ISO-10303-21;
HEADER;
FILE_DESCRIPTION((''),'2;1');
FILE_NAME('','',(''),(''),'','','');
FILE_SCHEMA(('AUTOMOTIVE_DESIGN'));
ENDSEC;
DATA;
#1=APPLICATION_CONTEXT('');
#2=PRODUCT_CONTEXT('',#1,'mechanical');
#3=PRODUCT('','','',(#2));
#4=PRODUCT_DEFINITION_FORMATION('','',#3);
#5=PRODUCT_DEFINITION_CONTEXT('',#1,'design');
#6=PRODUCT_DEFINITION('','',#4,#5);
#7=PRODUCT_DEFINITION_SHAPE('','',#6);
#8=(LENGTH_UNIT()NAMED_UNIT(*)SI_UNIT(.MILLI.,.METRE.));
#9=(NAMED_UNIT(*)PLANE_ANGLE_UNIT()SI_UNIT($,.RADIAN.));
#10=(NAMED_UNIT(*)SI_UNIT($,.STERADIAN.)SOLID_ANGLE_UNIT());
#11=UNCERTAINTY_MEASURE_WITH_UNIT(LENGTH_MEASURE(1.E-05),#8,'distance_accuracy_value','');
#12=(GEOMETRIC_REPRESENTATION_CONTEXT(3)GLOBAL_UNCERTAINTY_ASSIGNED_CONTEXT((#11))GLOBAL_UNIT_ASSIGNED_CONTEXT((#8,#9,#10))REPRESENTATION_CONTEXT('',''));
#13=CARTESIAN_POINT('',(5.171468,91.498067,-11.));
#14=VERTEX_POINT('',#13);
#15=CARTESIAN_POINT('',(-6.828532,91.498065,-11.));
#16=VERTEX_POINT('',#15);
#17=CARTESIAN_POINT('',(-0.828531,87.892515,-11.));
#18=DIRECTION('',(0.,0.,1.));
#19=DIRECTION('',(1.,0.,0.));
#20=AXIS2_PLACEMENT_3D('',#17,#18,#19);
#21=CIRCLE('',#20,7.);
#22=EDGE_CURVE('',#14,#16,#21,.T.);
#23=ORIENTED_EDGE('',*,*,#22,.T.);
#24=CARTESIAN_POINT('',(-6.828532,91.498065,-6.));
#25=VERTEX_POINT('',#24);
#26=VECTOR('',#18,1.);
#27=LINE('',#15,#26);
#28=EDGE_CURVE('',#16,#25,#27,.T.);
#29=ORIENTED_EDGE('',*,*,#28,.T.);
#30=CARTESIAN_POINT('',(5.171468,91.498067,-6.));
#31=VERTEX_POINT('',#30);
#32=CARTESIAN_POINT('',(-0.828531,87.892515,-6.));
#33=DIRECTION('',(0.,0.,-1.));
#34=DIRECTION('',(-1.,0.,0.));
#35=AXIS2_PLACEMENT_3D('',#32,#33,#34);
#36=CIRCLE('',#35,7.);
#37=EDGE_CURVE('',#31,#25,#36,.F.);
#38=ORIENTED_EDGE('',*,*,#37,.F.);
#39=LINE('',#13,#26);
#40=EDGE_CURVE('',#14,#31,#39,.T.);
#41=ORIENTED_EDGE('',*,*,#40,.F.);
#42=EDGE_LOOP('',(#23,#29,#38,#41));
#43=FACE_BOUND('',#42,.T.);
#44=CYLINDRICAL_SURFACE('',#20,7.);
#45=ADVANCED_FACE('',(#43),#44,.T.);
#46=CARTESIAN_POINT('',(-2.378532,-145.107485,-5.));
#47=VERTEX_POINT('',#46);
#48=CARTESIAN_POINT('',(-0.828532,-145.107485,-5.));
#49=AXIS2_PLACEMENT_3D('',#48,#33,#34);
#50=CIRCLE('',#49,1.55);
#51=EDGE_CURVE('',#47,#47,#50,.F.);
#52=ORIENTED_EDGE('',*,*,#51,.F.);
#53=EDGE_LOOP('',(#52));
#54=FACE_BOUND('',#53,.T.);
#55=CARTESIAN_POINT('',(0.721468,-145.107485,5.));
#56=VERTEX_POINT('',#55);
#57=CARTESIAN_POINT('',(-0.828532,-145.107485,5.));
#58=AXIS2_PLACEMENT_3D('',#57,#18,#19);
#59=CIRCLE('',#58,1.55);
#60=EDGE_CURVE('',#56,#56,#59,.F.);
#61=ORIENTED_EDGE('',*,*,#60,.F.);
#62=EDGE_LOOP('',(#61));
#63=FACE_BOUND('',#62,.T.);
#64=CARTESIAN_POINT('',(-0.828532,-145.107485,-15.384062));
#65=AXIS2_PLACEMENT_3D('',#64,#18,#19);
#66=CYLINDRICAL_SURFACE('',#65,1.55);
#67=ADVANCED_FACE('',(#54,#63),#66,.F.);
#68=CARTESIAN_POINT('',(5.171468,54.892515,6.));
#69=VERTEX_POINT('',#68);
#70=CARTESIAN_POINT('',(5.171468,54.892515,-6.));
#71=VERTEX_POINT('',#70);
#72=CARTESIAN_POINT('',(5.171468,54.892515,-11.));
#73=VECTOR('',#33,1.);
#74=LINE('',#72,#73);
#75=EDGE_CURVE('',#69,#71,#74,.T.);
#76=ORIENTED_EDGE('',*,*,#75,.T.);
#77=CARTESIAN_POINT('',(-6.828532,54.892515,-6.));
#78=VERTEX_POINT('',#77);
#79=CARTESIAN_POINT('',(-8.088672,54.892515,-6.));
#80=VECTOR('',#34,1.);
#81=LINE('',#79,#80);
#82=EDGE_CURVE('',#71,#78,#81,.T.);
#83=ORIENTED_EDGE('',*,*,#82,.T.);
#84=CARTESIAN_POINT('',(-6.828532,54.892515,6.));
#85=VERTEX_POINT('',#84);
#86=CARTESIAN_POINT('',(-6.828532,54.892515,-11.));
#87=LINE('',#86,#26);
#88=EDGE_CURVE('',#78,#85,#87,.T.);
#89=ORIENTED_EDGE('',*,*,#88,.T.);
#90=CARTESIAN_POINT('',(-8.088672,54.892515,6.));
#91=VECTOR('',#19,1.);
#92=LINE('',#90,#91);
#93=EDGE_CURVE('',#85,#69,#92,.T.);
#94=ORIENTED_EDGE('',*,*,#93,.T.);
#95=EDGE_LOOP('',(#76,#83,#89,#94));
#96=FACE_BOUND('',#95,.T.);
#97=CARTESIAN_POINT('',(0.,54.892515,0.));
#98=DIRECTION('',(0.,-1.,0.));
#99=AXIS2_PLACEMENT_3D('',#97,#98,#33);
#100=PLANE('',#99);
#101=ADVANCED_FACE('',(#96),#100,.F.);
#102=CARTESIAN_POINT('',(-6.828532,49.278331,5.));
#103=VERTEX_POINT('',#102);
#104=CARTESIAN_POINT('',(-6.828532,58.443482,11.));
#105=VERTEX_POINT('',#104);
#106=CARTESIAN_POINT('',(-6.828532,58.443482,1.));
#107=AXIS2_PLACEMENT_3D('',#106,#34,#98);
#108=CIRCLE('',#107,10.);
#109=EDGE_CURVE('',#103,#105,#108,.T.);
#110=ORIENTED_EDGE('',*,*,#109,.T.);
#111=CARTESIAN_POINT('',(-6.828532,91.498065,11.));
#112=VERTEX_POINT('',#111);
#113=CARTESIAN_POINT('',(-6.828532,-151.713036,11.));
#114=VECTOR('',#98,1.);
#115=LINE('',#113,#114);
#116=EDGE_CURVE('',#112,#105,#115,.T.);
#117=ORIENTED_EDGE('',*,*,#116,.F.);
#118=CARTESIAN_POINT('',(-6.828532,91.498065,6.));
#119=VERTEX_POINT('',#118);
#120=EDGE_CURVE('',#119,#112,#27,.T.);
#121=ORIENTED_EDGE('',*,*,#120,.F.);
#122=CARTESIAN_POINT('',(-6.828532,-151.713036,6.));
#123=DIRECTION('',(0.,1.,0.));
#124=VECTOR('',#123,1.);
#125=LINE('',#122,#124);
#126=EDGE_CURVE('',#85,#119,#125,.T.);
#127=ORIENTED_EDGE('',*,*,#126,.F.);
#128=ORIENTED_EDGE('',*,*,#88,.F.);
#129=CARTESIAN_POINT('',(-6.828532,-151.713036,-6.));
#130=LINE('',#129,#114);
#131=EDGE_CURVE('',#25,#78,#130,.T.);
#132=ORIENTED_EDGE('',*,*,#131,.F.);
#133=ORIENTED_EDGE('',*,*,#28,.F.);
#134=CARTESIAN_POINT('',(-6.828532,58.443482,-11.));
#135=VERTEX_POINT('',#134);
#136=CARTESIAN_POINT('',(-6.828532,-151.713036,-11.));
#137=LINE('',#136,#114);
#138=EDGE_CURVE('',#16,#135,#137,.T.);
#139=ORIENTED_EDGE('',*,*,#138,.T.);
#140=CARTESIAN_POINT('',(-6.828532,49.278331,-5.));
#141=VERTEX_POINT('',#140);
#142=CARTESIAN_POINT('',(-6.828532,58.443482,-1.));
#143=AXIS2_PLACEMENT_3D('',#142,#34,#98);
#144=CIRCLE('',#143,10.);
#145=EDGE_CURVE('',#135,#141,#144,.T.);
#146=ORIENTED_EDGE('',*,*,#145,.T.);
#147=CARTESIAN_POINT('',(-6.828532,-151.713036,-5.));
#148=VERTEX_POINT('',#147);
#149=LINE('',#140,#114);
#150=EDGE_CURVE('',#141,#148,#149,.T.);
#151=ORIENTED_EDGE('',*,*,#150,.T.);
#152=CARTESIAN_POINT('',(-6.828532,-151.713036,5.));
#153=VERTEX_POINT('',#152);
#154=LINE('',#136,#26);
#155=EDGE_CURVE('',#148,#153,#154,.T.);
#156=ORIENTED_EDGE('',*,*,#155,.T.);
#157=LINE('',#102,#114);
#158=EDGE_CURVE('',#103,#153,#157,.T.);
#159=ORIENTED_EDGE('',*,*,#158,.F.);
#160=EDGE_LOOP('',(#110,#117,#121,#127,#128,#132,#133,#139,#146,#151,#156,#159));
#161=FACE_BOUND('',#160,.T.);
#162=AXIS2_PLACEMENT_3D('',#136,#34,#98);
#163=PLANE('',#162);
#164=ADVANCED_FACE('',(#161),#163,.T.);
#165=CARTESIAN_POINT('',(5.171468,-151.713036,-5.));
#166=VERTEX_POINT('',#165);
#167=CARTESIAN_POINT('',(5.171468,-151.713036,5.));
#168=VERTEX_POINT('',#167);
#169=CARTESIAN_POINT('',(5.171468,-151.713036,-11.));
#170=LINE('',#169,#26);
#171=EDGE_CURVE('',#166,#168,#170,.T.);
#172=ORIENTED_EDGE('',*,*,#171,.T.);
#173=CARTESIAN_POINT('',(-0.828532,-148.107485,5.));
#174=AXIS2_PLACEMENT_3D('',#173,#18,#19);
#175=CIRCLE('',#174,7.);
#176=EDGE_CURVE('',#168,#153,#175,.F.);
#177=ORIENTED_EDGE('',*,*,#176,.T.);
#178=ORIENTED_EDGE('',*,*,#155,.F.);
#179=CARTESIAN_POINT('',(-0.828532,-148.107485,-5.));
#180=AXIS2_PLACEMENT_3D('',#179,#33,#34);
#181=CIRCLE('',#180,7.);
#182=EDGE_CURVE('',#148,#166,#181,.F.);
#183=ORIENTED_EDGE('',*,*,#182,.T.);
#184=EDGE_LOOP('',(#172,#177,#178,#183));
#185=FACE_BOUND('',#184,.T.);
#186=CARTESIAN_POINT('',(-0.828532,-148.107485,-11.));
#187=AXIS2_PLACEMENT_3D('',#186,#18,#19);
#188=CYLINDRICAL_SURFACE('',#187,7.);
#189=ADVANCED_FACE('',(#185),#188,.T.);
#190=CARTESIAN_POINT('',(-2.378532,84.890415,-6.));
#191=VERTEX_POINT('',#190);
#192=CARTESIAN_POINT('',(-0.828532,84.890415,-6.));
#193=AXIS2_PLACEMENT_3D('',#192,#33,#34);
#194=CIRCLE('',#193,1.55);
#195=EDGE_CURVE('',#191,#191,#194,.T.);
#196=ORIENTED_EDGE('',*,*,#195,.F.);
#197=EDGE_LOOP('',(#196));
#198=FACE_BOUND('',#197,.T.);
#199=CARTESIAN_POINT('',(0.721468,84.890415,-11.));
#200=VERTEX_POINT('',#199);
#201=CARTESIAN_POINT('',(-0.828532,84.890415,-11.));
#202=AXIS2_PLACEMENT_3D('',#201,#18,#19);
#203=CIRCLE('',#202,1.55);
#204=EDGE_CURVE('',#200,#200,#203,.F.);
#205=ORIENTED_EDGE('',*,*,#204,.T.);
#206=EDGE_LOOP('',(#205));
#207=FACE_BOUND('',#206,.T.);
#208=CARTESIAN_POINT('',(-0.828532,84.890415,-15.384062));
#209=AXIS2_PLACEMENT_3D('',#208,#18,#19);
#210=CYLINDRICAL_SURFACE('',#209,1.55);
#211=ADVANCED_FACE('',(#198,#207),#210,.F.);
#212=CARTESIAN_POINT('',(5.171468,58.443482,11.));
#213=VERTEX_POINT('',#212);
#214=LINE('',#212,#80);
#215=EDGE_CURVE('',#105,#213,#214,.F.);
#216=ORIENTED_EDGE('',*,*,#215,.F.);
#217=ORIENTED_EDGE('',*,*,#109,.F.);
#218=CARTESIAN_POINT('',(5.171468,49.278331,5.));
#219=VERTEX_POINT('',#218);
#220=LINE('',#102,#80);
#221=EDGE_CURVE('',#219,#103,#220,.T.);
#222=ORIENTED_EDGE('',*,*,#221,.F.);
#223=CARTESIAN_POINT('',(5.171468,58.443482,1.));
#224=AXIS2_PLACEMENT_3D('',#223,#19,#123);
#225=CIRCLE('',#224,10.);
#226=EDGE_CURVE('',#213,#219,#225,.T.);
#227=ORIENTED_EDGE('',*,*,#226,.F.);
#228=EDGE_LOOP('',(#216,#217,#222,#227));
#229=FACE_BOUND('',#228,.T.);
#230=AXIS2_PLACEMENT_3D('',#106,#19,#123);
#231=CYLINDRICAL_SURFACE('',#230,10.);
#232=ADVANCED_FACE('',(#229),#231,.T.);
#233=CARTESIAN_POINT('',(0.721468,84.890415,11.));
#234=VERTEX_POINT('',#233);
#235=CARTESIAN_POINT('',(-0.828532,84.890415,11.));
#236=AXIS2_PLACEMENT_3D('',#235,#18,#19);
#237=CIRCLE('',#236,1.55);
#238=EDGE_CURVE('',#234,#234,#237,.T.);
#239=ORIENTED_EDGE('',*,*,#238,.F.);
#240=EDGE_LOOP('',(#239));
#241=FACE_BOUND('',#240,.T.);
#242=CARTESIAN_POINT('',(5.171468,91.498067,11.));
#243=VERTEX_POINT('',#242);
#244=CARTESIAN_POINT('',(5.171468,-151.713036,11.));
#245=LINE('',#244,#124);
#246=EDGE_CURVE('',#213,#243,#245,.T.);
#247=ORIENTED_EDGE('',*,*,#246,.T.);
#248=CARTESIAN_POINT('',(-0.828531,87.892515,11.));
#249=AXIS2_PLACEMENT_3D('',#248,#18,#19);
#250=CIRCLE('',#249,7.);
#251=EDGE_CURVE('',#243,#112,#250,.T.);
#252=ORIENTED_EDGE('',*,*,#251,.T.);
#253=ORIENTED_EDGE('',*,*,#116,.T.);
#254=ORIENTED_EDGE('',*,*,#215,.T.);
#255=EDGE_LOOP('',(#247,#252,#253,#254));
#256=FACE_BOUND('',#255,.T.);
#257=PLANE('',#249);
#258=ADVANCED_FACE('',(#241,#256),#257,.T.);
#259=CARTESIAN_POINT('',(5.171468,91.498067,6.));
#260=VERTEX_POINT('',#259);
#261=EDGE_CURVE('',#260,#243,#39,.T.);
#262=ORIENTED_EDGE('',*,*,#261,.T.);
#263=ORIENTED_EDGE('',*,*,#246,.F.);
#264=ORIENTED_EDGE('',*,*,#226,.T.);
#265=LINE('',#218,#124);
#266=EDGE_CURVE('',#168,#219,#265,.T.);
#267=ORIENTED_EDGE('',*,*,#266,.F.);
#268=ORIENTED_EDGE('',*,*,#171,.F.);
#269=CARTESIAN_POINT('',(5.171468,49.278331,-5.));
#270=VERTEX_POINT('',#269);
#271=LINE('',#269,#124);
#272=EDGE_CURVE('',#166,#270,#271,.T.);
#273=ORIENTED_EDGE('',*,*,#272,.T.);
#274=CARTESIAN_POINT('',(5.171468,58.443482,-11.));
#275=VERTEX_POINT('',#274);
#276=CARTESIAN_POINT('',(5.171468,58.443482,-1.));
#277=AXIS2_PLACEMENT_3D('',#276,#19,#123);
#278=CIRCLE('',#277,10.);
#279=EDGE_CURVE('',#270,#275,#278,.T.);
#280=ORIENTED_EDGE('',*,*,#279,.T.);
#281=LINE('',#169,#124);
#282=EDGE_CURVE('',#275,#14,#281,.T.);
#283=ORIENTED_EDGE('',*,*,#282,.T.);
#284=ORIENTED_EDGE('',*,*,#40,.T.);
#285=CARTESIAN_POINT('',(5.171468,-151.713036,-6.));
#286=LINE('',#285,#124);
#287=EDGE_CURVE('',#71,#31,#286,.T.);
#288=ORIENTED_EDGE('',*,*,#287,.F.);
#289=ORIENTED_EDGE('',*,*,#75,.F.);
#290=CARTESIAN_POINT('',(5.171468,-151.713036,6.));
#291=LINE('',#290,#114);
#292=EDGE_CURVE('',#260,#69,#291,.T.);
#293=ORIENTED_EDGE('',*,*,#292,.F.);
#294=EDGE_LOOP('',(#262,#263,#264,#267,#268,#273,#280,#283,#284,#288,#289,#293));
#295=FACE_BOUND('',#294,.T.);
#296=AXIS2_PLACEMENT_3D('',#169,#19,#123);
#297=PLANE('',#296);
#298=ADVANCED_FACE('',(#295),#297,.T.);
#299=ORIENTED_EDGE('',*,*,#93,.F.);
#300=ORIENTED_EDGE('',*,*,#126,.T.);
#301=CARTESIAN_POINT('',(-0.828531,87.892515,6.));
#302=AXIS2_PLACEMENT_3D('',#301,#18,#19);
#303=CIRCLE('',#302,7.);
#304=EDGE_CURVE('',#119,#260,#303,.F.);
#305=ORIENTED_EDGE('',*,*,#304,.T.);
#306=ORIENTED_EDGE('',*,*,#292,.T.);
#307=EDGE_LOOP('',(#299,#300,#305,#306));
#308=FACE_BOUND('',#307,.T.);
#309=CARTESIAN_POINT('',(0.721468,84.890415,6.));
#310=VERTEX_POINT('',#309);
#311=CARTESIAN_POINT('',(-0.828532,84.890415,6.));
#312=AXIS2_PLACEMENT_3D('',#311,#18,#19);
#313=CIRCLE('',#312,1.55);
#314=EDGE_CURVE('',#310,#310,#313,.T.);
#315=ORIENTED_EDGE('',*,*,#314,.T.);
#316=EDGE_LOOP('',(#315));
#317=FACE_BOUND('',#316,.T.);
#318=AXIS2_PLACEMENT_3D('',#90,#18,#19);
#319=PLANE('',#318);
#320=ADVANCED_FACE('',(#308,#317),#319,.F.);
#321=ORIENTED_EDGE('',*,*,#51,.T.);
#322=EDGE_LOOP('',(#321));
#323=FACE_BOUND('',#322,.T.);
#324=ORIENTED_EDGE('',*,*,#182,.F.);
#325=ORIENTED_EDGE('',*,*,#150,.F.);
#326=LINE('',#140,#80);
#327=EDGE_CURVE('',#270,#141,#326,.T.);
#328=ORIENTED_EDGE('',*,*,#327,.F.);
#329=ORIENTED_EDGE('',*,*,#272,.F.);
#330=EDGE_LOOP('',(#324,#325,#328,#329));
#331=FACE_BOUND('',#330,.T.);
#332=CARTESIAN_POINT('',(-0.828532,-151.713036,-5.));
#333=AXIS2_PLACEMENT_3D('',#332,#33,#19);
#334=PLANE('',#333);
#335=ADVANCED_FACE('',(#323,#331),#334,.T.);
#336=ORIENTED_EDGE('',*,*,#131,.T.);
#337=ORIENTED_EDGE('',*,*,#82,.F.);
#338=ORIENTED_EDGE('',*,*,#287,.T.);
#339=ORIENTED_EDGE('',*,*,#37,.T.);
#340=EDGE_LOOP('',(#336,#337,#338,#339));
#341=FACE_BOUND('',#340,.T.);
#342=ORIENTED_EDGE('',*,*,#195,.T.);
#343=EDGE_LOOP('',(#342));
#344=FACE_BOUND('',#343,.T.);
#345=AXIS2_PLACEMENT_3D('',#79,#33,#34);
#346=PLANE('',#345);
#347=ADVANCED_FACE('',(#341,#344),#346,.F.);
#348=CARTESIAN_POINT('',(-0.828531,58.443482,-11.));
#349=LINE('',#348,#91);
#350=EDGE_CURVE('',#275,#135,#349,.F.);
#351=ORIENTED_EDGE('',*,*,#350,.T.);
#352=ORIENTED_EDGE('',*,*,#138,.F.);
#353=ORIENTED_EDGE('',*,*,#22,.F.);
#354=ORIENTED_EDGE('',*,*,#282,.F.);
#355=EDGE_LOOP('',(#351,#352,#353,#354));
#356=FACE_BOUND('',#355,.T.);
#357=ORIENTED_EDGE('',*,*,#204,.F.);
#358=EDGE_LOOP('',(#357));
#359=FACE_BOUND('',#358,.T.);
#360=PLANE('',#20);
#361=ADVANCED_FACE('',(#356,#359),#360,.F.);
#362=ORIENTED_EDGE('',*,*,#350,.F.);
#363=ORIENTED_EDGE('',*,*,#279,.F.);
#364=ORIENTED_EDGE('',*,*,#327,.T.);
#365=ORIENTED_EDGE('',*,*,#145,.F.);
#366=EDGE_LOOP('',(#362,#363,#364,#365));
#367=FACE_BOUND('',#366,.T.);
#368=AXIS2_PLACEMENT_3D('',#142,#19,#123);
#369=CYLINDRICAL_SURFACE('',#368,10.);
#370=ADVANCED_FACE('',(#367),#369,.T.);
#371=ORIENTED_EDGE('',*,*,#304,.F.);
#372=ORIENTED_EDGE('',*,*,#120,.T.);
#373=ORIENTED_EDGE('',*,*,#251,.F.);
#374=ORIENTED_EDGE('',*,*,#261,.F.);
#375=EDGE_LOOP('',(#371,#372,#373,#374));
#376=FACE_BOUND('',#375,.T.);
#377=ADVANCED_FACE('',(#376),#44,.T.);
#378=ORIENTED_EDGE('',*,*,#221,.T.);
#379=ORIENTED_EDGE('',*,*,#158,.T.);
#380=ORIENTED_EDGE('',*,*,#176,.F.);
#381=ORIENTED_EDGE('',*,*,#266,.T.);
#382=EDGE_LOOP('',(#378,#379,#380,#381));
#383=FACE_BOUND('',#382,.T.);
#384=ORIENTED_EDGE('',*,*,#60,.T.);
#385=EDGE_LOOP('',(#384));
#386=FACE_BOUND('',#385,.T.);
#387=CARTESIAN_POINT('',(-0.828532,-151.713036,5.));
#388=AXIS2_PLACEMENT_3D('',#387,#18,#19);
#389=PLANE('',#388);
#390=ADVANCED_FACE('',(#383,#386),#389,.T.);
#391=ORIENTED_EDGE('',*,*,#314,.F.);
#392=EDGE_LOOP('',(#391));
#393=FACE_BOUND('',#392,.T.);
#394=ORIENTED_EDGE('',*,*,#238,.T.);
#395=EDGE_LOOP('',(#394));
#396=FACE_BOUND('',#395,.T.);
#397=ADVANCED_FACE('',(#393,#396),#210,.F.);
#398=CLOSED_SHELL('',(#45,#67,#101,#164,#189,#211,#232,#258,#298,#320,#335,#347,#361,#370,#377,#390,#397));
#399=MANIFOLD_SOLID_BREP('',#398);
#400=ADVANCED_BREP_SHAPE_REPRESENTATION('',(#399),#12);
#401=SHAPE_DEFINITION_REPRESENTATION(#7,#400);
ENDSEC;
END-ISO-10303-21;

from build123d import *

# Parameters (mm, degrees)
BOSS_EXTRU_1_DEPTH      = 11
BOSS_EXTRU_1_DEPTH_BACK = 11
ESQUISSE3_W             = 16.581408451
ESQUISSE3_H             = 12
ENL_V_MAT_EXTRU_2_DEPTH = 40
CUT_EXTRUDE1_REACH      = 158.809
SKETCH1_R               = 1.55
CUT_EXTRUDE2_DEPTH      = 6
FILLET1_R               = 10


with BuildPart() as part:
    # Esquisse1 → Boss.-Extru.1 (new, two sides: drawn at the far end of the back side and taken through both)
    with BuildSketch(Plane.XY.offset(-BOSS_EXTRU_1_DEPTH_BACK)):
        with BuildLine():
            Line((-6.828531952, -151.713036206), (-6.828531952, 91.498065413))
            ThreePointArc((-6.828531952, 91.498065413), (-0.828532479, 94.89251507), (5.171468048, 91.498067278))
            Line((5.171468048, 91.498067278), (5.171468048, -151.713036206))
            ThreePointArc((5.171468048, -151.713036206), (-0.828531952, -155.10748493), (-6.828531952, -151.713036206))
        make_face()
    extrude(amount=BOSS_EXTRU_1_DEPTH + BOSS_EXTRU_1_DEPTH_BACK)

    # Esquisse3 → Enlèv. mat.-Extru.2 (cut)
    with BuildSketch(Plane(origin=(0, 94.89251507, 0), x_dir=(1, 0, 0), z_dir=(0, 1, 0))):
        with Locations((0.202032035, 0)):
            Rectangle(ESQUISSE3_W, ESQUISSE3_H)
    extrude(amount=-ENL_V_MAT_EXTRU_2_DEPTH, mode=Mode.SUBTRACT)

    # Cut-Extrude1: up to this face of the body (flat: up to its plane)
    cut_extrude1_end = Plane(part.part.faces().sort_by_distance((-0.828531947, -30.10748493, -11))[0])
    # Sketch1 → Cut-Extrude1 (cut, up to the picked face)
    with BuildSketch(Plane.XY.offset(11), mode=Mode.PRIVATE) as cut_extrude1_sk1:
        with Locations((-0.828531952, 84.890414662)):
            Circle(SKETCH1_R)
    cut_extrude1_tool1 = split(extrude(cut_extrude1_sk1.sketch, amount=-CUT_EXTRUDE1_REACH, mode=Mode.PRIVATE), bisect_by=cut_extrude1_end, keep=Keep.BOTH, mode=Mode.PRIVATE)
    # Sketch1 → Cut-Extrude1 (cut, up to the picked face)
    with BuildSketch(Plane.XY.offset(11), mode=Mode.PRIVATE) as cut_extrude1_sk2:
        with Locations((-0.828531952, -145.10748493)):
            Circle(SKETCH1_R)
    cut_extrude1_tool2 = split(extrude(cut_extrude1_sk2.sketch, amount=-CUT_EXTRUDE1_REACH, mode=Mode.PRIVATE), bisect_by=cut_extrude1_end, keep=Keep.BOTH, mode=Mode.PRIVATE)
    add(cut_extrude1_tool1.solids().sort_by(Axis((-0.828532, 84.890415, 11), (0, 0, -1)))[0], mode=Mode.SUBTRACT)
    add(cut_extrude1_tool2.solids().sort_by(Axis((-0.828532, -145.107485, 11), (0, 0, -1)))[0], mode=Mode.SUBTRACT)

    # Sketch4 → Cut-Extrude2 (cut)
    with BuildSketch(Plane.XY.offset(11)):
        with BuildLine():
            Line((-6.828531952, 49.278330566), (-6.828531952, -151.713036206))
            ThreePointArc((-6.828531952, -151.713036206), (-0.828531952, -157.713036206), (5.171468048, -151.713036206))
            Line((5.171468048, -151.713036206), (5.171468048, 49.278330566))
            Line((5.171468048, 49.278330566), (-6.828531952, 49.278330566))
        make_face()
    cut_extrude2 = extrude(amount=-CUT_EXTRUDE2_DEPTH, mode=Mode.SUBTRACT)

    # Mirror1: Cut-Extrude2 across plane
    add(cut_extrude2.mirror(Plane.XY), mode=Mode.SUBTRACT)

    # Fillet1
    # the kernel refuses this fillet: 10 mm, written as the material it takes off along each edge
    with BuildSketch(Plane(origin=(28.084346523, 49.278330566, -11), x_dir=(0, 1, 0), z_dir=(-1, 0, 0))) as fillet1_piece_1:
        with BuildLine():
            CenterArc((9.16515139, -10), FILLET1_R, 90, 66.421821522)
            Line((0, -6), (-0.183303028, -5.92))
            ThreePointArc((-0.183303028, -5.92), (-0.2, -3), (-0.2, 0))
            Line((-0.2, 0), (0, 0.2))
            Line((0, 0.2), (9.16515139, 0.2))
            Line((9.16515139, 0.2), (9.16515139, 0))
        make_face()
    extrude(amount=57.82575695, mode=Mode.SUBTRACT)
    with BuildSketch(Plane(origin=(28.084346523, 49.278330566, 11), x_dir=(0, 1, 0), z_dir=(-1, 0, 0))) as fillet1_piece_2:
        with BuildLine():
            CenterArc((9.16515139, 10), FILLET1_R, 203.578178478, 66.421821522)
            Line((0, 6), (-0.183303028, 5.92))
            ThreePointArc((-0.183303028, 5.92), (-0.2, 3), (-0.2, 0))
            Line((-0.2, 0), (0, -0.2))
            Line((0, -0.2), (9.16515139, -0.2))
            Line((9.16515139, -0.2), (9.16515139, 0))
        make_face()
    extrude(amount=57.82575695, mode=Mode.SUBTRACT)


solid = part.part
